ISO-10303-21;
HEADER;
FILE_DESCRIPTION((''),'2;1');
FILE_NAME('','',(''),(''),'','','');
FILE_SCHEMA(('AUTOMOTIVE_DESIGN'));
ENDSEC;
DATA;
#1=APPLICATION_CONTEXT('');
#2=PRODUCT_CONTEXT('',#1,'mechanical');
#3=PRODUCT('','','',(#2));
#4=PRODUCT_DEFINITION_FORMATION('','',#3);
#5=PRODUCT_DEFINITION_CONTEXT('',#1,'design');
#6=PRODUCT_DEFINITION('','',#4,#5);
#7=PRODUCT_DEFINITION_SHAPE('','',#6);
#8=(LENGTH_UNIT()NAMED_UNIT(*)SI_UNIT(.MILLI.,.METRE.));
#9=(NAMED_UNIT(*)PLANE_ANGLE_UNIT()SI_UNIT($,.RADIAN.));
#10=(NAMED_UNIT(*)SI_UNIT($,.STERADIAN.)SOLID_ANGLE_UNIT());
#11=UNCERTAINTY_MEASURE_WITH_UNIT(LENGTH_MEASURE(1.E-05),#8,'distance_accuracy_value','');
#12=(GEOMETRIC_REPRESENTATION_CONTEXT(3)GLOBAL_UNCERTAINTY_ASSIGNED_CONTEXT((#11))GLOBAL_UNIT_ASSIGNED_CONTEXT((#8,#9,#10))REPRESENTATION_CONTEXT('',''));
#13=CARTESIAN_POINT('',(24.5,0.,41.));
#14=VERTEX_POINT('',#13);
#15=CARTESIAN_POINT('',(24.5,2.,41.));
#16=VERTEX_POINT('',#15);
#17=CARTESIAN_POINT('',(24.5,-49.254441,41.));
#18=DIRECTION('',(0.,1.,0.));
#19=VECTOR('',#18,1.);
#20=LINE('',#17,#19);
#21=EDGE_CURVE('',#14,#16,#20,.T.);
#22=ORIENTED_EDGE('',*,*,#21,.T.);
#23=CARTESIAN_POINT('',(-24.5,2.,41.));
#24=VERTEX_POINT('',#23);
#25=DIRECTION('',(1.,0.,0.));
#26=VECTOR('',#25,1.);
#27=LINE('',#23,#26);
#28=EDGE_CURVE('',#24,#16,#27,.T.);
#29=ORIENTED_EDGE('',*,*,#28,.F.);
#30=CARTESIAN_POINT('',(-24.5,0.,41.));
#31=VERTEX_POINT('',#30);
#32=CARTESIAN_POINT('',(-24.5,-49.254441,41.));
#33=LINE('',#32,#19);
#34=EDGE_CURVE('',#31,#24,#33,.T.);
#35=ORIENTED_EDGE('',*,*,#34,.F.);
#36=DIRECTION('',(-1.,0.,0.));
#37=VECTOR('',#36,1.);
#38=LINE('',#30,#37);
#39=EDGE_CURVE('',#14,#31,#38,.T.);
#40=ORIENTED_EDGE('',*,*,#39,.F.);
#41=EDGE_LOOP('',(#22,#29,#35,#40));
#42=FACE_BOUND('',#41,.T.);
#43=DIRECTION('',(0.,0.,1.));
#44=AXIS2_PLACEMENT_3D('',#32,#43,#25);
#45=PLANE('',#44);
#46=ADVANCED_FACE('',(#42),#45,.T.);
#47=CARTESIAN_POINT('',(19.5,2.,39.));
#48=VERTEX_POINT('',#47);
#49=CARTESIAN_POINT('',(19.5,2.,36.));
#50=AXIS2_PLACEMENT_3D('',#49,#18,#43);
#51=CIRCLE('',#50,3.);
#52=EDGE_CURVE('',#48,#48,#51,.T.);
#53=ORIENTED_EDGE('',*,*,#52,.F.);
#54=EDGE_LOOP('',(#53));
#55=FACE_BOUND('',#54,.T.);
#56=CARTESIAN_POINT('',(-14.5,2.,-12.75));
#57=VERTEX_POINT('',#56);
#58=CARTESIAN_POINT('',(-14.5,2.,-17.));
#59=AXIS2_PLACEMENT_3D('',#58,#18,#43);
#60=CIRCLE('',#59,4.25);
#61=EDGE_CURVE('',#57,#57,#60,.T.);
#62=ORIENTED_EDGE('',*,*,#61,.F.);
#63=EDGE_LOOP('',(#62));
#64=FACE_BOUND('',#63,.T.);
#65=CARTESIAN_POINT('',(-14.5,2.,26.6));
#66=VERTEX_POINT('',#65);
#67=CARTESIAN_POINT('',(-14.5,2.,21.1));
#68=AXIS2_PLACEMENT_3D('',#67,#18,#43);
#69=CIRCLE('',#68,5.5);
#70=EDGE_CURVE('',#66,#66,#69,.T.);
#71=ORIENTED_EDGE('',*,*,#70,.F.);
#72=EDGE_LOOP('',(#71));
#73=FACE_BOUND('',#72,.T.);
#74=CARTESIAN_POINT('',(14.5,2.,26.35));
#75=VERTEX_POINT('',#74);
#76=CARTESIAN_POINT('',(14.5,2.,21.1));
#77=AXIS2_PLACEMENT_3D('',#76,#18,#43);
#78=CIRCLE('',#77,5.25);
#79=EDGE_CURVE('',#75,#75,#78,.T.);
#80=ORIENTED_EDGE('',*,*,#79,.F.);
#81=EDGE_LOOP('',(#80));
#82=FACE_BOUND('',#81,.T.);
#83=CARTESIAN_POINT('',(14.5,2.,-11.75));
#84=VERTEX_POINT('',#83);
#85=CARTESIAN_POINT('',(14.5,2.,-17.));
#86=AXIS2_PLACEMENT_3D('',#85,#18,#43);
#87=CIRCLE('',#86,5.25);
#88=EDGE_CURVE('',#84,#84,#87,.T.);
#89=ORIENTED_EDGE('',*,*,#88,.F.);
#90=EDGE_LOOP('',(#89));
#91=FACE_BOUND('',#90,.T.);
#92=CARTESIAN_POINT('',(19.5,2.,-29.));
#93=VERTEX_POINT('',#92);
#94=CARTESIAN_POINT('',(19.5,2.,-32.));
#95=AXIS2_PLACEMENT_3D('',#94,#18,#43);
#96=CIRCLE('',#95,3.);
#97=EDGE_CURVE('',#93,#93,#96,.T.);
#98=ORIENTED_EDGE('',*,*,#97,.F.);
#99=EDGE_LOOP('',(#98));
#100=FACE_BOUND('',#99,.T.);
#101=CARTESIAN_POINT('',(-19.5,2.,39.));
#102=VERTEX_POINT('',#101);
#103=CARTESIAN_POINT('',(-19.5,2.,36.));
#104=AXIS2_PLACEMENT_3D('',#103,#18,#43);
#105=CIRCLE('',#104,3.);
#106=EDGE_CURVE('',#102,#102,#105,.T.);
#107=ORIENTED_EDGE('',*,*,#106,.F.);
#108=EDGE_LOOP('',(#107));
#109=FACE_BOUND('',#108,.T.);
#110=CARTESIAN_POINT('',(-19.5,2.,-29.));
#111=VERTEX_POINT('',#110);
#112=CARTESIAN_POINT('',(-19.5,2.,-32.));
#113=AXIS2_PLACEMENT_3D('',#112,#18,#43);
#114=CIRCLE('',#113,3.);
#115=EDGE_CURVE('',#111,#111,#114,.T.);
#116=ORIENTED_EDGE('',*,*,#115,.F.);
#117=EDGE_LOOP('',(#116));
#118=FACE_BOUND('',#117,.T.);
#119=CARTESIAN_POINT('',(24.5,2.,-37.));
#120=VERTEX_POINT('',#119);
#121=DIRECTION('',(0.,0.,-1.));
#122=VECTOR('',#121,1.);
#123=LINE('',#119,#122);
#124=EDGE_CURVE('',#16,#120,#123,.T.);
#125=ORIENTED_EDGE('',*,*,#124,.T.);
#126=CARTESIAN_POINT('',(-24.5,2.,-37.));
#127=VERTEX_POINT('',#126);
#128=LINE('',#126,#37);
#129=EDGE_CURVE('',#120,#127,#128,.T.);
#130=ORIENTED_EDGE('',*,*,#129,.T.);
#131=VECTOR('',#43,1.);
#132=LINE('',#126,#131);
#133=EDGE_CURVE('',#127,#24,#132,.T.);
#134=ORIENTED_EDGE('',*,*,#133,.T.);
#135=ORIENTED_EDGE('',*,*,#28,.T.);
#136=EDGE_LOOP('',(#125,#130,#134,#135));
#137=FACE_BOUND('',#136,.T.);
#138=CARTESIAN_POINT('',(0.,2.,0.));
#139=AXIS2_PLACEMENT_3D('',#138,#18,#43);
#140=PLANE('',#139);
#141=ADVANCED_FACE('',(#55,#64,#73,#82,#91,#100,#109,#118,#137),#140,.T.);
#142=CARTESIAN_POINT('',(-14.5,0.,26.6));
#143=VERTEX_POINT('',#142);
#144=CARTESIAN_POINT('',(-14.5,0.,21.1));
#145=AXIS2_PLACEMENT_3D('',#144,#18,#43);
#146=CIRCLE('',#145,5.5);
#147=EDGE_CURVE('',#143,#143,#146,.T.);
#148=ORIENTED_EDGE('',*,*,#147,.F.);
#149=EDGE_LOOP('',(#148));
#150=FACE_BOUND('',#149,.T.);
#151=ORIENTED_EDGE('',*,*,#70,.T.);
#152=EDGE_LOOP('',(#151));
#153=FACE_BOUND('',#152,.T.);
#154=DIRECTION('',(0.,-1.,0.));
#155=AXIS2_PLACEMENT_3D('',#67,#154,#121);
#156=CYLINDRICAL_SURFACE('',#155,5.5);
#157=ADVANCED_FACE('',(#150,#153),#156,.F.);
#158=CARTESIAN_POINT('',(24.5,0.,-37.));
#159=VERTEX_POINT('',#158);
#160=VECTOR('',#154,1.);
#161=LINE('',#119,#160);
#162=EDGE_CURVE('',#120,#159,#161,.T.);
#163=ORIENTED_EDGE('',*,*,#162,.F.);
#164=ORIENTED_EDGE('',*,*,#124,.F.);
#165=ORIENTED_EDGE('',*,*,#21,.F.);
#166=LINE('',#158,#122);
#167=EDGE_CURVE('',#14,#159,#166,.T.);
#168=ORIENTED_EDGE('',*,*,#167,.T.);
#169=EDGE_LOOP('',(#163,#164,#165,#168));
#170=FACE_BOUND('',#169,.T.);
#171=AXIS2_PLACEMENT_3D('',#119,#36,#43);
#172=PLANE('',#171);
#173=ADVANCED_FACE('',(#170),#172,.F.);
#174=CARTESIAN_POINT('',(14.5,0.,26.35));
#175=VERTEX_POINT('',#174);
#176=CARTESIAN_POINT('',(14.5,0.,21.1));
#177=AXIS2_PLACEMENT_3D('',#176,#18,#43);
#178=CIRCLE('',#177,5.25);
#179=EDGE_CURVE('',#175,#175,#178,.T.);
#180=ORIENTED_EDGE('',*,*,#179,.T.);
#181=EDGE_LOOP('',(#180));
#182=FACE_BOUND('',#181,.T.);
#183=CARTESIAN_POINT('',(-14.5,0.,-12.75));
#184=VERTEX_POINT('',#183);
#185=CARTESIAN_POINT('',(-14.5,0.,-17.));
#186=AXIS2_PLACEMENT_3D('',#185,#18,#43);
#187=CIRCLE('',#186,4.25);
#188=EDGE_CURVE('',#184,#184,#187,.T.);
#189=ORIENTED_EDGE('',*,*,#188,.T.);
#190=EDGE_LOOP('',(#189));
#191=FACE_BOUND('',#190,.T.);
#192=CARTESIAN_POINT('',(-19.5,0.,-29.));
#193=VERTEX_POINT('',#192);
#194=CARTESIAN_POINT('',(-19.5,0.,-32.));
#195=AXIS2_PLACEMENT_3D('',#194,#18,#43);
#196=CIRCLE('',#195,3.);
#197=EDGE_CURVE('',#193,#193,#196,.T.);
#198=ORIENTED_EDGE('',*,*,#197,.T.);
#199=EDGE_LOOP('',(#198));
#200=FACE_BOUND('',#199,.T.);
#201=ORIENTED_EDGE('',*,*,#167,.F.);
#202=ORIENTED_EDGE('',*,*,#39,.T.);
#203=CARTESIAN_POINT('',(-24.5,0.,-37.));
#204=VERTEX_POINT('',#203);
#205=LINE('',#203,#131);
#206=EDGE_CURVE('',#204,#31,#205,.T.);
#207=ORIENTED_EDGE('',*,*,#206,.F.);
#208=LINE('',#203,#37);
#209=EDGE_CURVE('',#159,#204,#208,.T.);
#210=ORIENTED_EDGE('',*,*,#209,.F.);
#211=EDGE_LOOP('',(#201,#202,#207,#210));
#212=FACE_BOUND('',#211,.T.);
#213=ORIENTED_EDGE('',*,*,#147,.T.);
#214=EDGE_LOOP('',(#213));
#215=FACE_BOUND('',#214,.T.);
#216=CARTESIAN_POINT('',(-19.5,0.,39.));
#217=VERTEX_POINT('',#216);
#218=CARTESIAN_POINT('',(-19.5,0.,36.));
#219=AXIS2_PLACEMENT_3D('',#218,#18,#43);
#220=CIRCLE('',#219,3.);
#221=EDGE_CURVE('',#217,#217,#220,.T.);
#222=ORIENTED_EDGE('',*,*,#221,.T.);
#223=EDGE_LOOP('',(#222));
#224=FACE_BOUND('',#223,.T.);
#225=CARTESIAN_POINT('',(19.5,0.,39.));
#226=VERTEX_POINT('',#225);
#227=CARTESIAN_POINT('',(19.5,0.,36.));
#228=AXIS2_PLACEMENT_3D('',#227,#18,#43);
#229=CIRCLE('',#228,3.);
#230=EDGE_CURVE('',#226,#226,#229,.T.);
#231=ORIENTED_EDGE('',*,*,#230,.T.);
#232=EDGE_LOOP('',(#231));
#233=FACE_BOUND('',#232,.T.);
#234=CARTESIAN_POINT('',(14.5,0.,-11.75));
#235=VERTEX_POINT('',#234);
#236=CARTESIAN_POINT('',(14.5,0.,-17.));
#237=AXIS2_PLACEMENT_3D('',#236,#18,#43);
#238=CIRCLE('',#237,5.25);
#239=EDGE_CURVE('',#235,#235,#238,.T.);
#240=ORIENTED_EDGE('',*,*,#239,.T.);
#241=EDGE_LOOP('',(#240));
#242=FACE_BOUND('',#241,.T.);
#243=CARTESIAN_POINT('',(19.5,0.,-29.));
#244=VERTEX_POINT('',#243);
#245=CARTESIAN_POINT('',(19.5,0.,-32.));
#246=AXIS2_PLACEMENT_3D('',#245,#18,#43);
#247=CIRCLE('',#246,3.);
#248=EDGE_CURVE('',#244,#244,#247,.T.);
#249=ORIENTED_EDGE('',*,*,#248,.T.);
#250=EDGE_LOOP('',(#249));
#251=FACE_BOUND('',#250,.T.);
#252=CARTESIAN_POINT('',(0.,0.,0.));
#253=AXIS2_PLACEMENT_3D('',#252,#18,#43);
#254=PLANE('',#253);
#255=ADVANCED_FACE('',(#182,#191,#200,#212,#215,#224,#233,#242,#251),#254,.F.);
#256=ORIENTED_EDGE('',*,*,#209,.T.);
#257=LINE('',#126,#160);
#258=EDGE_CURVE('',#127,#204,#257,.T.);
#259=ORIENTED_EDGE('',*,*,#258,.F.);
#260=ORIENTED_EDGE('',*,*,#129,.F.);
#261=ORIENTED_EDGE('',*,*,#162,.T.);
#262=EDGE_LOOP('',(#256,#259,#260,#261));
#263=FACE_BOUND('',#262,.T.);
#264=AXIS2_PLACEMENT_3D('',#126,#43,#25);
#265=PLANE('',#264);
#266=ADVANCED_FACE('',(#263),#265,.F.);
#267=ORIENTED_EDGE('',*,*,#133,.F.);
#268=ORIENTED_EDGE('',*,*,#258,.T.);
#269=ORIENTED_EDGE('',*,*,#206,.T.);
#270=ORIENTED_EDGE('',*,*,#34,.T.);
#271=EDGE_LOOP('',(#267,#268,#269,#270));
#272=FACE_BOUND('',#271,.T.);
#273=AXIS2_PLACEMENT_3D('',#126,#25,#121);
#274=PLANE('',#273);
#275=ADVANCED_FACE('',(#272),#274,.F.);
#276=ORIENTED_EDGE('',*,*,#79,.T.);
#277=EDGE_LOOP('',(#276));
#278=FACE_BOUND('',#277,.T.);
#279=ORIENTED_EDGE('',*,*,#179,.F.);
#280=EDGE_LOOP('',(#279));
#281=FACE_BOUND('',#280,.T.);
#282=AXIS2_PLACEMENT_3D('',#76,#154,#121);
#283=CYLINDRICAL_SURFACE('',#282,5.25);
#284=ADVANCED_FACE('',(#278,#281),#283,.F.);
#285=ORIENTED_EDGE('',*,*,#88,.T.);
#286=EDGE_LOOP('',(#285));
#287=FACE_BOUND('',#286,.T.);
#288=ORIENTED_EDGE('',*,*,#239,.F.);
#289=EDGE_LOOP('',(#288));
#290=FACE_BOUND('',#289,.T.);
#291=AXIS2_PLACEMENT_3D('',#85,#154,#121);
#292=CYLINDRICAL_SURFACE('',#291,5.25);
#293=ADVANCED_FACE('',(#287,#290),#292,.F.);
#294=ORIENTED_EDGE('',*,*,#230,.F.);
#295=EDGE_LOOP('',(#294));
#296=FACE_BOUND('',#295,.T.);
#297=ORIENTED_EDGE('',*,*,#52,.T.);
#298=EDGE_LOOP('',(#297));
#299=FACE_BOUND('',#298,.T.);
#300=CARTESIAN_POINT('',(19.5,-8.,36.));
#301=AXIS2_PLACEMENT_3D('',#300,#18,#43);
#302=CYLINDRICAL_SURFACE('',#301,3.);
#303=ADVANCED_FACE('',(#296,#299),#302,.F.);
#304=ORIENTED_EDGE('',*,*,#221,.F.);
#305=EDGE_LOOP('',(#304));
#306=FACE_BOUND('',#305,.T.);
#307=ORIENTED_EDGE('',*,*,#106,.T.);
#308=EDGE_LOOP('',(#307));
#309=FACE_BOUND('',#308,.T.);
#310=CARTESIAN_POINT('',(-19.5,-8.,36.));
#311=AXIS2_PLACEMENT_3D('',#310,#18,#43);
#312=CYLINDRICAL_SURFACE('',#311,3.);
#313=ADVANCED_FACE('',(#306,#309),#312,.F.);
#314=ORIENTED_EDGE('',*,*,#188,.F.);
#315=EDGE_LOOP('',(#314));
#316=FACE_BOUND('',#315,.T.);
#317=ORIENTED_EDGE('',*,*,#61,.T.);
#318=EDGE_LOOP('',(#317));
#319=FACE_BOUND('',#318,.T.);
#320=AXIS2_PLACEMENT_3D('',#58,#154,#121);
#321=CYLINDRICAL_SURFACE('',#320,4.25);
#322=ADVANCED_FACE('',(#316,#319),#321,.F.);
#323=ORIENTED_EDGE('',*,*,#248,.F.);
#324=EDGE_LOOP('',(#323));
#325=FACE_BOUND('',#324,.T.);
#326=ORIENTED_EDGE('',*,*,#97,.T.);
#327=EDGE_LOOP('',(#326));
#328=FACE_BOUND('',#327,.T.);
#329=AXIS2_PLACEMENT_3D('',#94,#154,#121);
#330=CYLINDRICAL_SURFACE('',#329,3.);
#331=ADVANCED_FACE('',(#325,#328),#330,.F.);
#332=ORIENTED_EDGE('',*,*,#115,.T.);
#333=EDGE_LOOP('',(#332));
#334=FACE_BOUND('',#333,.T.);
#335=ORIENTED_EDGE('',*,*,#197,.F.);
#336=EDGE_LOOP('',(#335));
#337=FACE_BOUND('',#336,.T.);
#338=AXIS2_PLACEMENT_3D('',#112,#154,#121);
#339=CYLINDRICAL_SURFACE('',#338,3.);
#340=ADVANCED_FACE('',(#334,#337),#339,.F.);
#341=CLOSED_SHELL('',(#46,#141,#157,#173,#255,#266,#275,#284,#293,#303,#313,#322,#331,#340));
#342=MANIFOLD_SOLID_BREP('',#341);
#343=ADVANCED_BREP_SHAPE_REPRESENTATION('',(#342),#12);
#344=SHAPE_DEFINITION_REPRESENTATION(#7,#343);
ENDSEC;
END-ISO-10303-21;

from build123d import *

# Parameters (mm, degrees)
CROQUIS1_W              = 49
CROQUIS1_H              = 73
CROQUIS1_R              = 5.25
CROQUIS1_R_2            = 5.5
CROQUIS1_R_3            = 4.25
CROQUIS1_R_4            = 3
SALIENTE_EXTRUIR4_DEPTH = 2
CROQUIS7_W              = 49
CROQUIS7_H              = 5
SALIENTE_EXTRUIR5_DEPTH = 2
CROQUIS8_R              = 3
CORTAR_EXTRUIR2_DEPTH   = 10


with BuildPart() as part:
    # Croquis1 → Saliente-Extruir4 (new body)
    with BuildSketch(Plane(origin=(0, 0, 0), x_dir=(1, 0, 0), z_dir=(0, 1, 0))):
        with Locations((0, 0.5)):
            Rectangle(CROQUIS1_W, CROQUIS1_H)
        with Locations(Location((14.5, -21.1, 0), (0, 0, 270))):
            Circle(CROQUIS1_R, mode=Mode.SUBTRACT)
        with Locations(Location((-14.5, -21.1, 0), (0, 0, 270))):
            Circle(CROQUIS1_R_2, mode=Mode.SUBTRACT)
        with Locations(Location((-14.5, 17, 0), (0, 0, 270))):
            Circle(CROQUIS1_R_3, mode=Mode.SUBTRACT)
        with Locations(Location((14.5, 17, 0), (0, 0, 270))):
            Circle(CROQUIS1_R, mode=Mode.SUBTRACT)
        with Locations(Location((-19.5, 32, 0), (0, 0, 270))):
            Circle(CROQUIS1_R_4, mode=Mode.SUBTRACT)
        with Locations(Location((19.5, 32, 0), (0, 0, 270))):
            Circle(CROQUIS1_R_4, mode=Mode.SUBTRACT)
    extrude(amount=SALIENTE_EXTRUIR4_DEPTH)

    # Croquis7 → Saliente-Extruir5 (add)
    with BuildSketch(Plane(origin=(0, 2, 0), x_dir=(1, 0, 0), z_dir=(0, 1, 0))):
        with Locations((0, -38.5)):
            Rectangle(CROQUIS7_W, CROQUIS7_H)
    extrude(amount=-SALIENTE_EXTRUIR5_DEPTH)

    # Croquis8 → Cortar-Extruir2 (cut)
    with BuildSketch(Plane(origin=(0, 2, 0), x_dir=(1, 0, 0), z_dir=(0, 1, 0))):
        with Locations(Location((-19.5, -36, 0), (0, 0, 270))):
            Circle(CROQUIS8_R)
        with Locations(Location((19.5, -36, 0), (0, 0, 270))):
            Circle(CROQUIS8_R)
    extrude(amount=-CORTAR_EXTRUIR2_DEPTH, mode=Mode.SUBTRACT)


solid = part.part
